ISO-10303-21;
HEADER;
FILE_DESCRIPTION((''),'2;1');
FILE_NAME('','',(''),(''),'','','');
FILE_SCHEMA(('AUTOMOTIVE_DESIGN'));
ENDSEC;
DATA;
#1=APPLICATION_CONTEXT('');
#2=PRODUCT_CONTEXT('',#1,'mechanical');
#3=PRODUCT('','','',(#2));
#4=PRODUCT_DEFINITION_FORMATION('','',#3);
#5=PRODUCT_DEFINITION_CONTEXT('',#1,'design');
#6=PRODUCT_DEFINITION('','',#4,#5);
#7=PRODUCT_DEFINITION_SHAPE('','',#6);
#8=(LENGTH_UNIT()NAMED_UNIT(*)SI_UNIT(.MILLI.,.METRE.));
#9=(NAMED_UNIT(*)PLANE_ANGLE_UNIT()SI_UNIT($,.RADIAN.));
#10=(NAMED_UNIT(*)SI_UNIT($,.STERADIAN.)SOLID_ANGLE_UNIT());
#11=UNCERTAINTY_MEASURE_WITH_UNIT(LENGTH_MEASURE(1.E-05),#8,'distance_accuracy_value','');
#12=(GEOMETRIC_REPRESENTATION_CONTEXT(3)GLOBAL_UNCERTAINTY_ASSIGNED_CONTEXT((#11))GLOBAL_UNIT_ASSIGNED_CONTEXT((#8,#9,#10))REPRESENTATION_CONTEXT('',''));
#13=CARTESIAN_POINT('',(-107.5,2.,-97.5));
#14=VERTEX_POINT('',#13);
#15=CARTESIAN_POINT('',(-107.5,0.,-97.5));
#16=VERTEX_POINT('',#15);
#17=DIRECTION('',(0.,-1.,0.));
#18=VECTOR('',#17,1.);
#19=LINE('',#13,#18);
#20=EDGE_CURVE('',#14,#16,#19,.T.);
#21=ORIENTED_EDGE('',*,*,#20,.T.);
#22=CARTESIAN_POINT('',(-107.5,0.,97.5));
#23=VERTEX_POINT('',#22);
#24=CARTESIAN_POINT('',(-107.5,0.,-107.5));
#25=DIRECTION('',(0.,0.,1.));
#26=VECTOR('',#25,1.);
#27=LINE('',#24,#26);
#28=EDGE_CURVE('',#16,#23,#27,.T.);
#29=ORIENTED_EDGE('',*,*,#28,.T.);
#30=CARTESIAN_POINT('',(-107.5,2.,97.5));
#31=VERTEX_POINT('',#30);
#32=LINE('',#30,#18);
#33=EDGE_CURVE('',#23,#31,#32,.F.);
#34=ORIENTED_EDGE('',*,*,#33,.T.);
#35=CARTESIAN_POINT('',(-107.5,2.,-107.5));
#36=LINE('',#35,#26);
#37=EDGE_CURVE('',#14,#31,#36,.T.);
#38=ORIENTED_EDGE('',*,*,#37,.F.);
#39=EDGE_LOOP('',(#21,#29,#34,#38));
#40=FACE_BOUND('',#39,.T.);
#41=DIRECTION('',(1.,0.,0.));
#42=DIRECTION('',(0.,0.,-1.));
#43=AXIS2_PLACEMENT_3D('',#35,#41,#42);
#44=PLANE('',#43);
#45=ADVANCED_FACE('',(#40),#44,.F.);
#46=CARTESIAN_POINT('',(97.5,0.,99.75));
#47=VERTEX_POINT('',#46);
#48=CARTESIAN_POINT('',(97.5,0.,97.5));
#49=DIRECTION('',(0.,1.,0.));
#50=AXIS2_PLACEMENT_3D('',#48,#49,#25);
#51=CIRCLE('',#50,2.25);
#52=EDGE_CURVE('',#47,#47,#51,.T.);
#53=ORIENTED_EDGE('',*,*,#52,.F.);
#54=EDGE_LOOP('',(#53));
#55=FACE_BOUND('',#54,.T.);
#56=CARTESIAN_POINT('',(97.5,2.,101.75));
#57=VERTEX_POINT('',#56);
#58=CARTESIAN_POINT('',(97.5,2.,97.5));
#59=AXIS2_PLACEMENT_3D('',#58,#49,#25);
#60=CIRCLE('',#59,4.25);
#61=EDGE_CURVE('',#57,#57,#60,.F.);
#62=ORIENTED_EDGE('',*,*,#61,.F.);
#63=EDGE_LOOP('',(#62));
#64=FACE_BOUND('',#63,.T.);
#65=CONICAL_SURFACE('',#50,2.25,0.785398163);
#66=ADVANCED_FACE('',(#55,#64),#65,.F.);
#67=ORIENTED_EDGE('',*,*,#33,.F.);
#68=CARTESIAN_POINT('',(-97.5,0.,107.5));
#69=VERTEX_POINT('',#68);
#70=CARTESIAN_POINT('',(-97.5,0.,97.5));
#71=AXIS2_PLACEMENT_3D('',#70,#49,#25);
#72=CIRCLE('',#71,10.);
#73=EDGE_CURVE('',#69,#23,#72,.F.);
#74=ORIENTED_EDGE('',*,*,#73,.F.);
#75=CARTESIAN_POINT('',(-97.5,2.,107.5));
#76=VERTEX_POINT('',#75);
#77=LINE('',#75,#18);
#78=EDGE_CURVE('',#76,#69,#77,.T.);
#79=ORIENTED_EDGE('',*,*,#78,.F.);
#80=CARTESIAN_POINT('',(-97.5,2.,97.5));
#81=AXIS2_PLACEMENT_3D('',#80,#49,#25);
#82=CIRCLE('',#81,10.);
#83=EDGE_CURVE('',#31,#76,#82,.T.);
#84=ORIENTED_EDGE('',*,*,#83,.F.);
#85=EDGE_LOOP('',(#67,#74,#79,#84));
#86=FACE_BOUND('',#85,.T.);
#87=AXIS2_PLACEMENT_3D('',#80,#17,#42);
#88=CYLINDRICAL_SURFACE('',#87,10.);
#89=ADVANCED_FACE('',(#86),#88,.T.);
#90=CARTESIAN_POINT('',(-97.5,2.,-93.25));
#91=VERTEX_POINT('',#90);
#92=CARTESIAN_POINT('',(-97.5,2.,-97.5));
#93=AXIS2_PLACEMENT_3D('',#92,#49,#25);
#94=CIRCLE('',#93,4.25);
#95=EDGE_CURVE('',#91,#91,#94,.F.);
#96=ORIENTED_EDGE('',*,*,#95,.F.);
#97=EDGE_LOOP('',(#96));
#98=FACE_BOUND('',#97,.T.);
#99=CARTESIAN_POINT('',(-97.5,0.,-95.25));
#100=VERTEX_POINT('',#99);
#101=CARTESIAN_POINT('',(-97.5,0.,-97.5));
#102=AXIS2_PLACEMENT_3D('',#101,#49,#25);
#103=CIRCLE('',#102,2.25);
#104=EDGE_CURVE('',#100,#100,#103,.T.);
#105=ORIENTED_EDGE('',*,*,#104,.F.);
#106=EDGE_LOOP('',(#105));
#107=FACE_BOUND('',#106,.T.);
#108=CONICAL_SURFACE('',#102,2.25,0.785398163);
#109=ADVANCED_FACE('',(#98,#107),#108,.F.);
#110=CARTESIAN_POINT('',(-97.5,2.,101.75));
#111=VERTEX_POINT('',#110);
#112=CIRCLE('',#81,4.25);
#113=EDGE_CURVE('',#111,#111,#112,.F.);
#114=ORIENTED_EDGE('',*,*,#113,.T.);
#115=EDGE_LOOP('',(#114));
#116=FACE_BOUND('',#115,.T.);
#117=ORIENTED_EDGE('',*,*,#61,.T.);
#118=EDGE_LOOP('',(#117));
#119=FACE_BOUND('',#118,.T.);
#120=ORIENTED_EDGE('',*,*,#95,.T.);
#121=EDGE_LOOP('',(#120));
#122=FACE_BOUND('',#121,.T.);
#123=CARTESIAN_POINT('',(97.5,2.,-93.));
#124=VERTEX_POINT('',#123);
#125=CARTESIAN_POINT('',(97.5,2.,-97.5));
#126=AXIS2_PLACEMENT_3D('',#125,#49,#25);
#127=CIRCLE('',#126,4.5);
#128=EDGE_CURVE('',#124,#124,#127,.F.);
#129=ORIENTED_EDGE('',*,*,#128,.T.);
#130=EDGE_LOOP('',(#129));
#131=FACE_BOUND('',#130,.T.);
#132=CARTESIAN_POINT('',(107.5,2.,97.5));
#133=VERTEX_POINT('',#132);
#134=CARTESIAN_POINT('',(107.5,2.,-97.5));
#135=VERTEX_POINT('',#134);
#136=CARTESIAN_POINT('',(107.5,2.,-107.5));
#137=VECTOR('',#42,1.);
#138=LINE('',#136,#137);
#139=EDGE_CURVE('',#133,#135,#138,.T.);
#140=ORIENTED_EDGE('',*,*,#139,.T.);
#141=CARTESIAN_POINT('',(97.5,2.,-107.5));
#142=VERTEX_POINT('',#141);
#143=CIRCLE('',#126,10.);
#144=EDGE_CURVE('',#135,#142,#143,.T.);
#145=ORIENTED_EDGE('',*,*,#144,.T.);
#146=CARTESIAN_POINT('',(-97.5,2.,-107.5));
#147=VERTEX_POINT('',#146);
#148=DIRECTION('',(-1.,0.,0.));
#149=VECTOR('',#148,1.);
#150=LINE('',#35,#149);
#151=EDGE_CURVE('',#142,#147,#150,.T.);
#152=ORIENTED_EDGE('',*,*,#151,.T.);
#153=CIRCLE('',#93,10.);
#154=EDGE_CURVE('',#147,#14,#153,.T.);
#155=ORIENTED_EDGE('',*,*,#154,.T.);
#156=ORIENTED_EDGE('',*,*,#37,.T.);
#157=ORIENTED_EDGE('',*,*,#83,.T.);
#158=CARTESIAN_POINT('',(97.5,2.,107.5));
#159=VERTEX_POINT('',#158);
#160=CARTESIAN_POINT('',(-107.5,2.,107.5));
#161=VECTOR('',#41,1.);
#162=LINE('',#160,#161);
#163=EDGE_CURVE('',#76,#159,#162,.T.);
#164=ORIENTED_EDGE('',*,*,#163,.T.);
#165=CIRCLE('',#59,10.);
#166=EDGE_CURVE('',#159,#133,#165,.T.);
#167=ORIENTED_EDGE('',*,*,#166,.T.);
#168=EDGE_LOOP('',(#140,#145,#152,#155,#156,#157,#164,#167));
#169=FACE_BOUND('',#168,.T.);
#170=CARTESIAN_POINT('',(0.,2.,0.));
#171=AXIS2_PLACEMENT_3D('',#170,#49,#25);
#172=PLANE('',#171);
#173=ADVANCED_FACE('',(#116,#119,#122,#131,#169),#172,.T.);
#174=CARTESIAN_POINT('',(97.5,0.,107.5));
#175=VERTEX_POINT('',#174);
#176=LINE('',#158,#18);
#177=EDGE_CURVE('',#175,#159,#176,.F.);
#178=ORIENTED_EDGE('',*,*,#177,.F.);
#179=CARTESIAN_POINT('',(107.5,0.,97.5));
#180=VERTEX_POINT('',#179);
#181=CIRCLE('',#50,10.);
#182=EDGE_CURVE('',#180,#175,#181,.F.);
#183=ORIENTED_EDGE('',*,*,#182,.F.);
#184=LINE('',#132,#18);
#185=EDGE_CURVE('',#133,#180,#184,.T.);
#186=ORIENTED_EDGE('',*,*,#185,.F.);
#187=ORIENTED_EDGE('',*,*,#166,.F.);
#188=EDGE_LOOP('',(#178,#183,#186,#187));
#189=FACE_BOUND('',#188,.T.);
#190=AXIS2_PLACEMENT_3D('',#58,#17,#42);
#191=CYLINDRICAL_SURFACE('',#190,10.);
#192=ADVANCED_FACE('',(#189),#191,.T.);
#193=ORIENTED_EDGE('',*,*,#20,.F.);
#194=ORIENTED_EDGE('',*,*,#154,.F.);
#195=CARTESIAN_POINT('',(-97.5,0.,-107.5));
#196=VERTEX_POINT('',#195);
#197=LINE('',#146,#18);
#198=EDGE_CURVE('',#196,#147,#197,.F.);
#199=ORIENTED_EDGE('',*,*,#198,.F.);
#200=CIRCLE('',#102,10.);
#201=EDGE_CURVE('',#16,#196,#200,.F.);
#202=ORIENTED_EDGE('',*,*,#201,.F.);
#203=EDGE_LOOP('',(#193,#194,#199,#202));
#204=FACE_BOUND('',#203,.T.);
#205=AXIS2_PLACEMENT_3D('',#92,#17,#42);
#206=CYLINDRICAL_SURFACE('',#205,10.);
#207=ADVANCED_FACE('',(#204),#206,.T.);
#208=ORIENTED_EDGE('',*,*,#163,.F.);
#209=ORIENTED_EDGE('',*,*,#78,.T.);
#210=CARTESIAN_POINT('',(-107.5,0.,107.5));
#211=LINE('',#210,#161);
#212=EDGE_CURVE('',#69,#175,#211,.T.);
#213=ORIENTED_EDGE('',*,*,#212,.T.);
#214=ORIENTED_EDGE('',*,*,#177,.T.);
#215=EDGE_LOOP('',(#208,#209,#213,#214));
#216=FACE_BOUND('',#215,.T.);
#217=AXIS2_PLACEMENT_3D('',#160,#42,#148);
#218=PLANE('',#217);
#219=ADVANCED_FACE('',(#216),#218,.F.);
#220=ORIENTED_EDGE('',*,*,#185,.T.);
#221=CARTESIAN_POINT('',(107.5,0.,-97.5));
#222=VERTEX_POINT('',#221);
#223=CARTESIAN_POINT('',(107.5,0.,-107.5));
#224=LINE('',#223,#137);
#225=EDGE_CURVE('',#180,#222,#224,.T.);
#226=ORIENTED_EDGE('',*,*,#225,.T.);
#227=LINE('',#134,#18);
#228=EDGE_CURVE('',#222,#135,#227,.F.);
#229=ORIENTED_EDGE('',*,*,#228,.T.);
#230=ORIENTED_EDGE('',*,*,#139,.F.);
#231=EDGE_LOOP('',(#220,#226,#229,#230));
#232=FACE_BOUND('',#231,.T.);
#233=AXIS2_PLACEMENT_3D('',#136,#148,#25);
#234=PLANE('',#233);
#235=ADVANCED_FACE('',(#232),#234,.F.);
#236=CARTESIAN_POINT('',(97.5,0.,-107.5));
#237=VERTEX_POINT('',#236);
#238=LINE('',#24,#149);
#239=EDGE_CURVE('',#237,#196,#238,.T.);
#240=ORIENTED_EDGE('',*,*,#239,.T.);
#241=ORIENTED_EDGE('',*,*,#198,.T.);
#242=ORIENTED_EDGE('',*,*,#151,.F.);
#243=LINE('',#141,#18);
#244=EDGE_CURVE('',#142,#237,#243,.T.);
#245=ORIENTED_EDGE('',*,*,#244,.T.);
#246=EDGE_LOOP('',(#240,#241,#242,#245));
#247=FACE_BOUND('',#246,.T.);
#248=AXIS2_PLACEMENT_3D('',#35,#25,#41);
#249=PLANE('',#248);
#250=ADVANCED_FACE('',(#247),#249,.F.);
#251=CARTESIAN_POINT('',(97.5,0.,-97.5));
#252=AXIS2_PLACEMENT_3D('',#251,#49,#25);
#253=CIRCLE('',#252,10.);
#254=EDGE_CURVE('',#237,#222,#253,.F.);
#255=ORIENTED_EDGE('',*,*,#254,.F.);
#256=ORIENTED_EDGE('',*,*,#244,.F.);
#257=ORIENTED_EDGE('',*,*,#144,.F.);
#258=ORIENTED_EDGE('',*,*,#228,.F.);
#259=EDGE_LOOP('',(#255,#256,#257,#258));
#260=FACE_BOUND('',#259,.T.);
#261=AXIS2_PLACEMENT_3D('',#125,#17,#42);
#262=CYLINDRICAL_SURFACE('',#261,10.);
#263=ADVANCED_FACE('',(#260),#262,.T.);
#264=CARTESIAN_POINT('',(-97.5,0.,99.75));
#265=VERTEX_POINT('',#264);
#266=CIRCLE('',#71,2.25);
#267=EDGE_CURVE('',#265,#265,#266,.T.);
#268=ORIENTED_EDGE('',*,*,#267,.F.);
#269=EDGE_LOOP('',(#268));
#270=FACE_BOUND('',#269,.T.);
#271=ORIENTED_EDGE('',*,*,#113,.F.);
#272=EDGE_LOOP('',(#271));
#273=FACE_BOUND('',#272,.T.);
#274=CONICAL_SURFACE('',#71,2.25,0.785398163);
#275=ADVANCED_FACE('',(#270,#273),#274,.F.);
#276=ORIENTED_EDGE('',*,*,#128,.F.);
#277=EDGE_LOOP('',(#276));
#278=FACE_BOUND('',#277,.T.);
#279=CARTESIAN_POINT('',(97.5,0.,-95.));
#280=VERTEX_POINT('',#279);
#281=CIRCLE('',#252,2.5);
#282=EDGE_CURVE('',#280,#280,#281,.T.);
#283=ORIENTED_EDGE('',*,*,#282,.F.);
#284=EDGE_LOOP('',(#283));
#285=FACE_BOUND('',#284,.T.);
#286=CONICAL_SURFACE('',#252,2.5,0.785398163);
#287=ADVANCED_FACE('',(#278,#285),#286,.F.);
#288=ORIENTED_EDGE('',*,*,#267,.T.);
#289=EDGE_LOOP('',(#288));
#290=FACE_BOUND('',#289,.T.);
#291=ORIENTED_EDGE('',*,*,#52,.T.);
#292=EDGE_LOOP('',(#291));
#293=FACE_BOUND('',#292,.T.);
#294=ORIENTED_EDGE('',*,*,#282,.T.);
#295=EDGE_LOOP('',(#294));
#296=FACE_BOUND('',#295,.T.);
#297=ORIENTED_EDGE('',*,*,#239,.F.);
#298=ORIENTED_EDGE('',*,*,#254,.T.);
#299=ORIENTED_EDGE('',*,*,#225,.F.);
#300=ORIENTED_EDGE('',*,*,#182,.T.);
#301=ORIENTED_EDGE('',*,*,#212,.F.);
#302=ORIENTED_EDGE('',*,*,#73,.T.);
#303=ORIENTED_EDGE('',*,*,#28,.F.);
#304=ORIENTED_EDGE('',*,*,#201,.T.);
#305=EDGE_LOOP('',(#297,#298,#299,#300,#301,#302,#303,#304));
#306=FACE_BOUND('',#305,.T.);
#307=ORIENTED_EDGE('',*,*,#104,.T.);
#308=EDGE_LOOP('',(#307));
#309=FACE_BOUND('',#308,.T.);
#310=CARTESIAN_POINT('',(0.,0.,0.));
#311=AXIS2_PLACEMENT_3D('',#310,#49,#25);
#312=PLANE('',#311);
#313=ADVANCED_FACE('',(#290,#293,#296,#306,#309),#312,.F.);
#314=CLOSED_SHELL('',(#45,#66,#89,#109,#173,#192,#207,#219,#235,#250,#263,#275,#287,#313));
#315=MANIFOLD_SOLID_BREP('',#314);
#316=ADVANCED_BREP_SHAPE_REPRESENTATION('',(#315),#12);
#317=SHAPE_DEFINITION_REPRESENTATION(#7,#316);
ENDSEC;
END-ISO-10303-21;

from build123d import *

# Parameters (mm, degrees)
SKETCH1_W           = 215
SKETCH1_H           = 215
BOSS_EXTRUDE1_DEPTH = 2
SKETCH2_R           = 2.25
SKETCH2_R_2         = 2.5
CUT_EXTRUDE1_DEPTH  = 153.041112861
CHAMFER1_SIZE       = 2
FILLET1_R           = 10


with BuildPart() as part:
    # Sketch1 → Boss-Extrude1 (new body)
    with BuildSketch(Plane(origin=(0, 0, 0), x_dir=(1, 0, 0), z_dir=(0, 1, 0))):
        Rectangle(SKETCH1_W, SKETCH1_H)
    extrude(amount=BOSS_EXTRUDE1_DEPTH)

    # Sketch2 → Cut-Extrude1 (cut, through all)
    with BuildSketch(Plane(origin=(0, 2, 0), x_dir=(1, 0, 0), z_dir=(0, 1, 0))):
        with Locations(Location((-97.5, 97.5, 0), (0, 0, 270))):
            Circle(SKETCH2_R)
        with Locations(Location((-97.5, -97.5, 0), (0, 0, 270))):
            Circle(SKETCH2_R)
        with Locations(Location((97.5, -97.5, 0), (0, 0, 270))):
            Circle(SKETCH2_R)
        with Locations(Location((97.5, 97.5, 0), (0, 0, 270))):
            Circle(SKETCH2_R_2)
    extrude(amount=-CUT_EXTRUDE1_DEPTH, mode=Mode.SUBTRACT)

    # Chamfer1
    chamfer1_edges = [part.edges().sort_by_distance(p)[0] for p in [
        (-97.5, 2, -99.75),
        (-97.5, 2, 95.25),
        (97.5, 2, 95.25),
        (97.5, 2, -100),
    ]]
    chamfer(chamfer1_edges, length=CHAMFER1_SIZE - 0.0001)  # a hair under: the kernel refuses the full size

    # Fillet1
    fillet1_edges = [part.edges().sort_by_distance(p)[0] for p in [
        (-107.5, 1, -107.5),
        (107.5, 1, -107.5),
        (107.5, 1, 107.5),
        (-107.5, 1, 107.5),
    ]]
    fillet(fillet1_edges, radius=FILLET1_R)


solid = part.part
